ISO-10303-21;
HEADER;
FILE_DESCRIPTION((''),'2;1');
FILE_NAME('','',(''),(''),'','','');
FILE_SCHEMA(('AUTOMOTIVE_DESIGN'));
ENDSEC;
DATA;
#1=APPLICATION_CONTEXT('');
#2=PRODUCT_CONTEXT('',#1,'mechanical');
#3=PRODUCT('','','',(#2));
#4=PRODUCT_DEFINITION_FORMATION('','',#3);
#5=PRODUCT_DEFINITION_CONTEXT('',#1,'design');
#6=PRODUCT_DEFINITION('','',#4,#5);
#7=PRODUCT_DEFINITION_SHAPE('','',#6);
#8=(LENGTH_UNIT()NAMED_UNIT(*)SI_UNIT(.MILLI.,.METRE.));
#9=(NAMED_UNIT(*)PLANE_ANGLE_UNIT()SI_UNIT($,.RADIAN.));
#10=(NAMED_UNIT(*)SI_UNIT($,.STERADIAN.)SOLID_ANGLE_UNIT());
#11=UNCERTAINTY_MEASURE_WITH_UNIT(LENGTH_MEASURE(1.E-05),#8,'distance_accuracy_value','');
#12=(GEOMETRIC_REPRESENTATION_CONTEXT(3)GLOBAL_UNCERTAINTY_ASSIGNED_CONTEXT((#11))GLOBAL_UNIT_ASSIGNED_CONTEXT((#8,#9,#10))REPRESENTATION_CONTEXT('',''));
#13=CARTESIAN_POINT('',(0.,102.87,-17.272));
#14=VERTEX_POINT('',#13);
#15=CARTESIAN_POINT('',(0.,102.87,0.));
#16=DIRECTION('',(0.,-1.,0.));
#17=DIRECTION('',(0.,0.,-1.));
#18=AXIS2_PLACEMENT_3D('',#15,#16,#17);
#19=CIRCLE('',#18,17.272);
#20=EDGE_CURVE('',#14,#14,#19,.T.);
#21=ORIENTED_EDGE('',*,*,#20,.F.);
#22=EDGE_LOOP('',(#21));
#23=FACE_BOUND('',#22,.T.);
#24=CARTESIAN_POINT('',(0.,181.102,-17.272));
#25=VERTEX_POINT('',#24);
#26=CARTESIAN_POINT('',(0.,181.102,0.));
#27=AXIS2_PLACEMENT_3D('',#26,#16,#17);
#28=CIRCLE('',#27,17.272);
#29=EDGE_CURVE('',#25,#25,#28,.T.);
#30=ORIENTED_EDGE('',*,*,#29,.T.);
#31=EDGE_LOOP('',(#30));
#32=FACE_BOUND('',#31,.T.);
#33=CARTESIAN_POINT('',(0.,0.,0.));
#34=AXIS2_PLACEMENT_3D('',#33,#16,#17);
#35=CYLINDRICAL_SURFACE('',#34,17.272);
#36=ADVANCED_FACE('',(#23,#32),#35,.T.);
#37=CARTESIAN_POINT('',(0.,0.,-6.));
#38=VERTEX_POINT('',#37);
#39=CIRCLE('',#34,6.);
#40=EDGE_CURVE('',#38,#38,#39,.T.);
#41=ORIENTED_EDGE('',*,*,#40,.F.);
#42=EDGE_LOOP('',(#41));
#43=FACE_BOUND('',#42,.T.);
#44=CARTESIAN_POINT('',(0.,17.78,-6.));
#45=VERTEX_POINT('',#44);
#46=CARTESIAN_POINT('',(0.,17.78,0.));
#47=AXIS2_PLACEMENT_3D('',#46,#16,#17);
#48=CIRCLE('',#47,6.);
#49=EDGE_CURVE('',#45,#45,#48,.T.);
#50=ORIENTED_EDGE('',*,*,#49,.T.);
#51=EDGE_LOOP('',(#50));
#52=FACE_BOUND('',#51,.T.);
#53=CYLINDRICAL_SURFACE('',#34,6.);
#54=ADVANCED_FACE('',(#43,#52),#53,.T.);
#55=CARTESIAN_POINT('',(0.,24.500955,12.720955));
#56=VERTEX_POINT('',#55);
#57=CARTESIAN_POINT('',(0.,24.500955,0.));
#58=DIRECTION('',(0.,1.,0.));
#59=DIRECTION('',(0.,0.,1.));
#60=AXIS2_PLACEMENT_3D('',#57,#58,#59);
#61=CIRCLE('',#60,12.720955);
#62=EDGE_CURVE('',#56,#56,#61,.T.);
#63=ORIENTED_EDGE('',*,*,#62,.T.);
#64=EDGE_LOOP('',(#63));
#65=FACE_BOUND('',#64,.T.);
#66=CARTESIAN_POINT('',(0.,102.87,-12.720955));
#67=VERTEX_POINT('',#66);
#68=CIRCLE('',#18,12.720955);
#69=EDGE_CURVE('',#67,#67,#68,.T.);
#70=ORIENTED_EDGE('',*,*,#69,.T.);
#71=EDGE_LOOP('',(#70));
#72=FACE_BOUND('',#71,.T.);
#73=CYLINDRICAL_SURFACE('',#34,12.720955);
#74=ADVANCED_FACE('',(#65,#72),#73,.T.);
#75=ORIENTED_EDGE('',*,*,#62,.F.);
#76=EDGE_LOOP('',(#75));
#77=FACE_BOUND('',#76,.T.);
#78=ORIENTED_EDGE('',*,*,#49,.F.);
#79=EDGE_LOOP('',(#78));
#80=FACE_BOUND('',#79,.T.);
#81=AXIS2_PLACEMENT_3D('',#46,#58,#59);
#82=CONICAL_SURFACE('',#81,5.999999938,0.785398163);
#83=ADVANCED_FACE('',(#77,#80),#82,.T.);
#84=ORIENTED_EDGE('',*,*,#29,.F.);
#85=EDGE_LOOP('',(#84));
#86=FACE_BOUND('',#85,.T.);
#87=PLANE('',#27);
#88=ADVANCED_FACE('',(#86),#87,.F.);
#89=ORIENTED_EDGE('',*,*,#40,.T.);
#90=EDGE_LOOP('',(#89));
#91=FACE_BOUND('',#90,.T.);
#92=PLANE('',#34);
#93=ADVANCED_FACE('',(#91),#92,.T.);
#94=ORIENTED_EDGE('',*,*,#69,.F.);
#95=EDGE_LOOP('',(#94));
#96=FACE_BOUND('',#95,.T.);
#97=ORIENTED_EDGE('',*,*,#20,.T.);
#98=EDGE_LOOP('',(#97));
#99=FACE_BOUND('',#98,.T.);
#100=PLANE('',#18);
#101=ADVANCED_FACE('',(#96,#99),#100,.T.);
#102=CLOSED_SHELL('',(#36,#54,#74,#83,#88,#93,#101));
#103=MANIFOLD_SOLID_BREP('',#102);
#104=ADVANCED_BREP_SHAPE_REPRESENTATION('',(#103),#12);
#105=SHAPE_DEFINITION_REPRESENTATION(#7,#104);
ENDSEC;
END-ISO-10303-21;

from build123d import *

# Parameters (mm, degrees)
SKETCH2_W     = 12.720955
SKETCH2_H     = 33.02
SKETCH2_W_2   = 5.999999938
SKETCH2_H_2   = 25.4
CHAMFER1_SIZE = 7.62


with BuildPart() as part:
    # Sketch2 → Revolve1 (revolve)
    with BuildSketch(Plane.XY, mode=Mode.PRIVATE) as revolve1_sk:
        with Locations((6.3604775, 86.36)):
            Rectangle(SKETCH2_W, SKETCH2_H)
        Polygon((0, 181.102), (0, 102.87), (12.720955, 102.87), (17.272, 102.87), (17.272, 181.102), align=None)
        Polygon((0, 69.85), (0, 25.4), (5.999999938, 25.4), (12.720955, 25.4), (12.720955, 69.85), align=None)
        with Locations((2.999999969, 12.7)):
            Rectangle(SKETCH2_W_2, SKETCH2_H_2)
    revolve(revolve1_sk.sketch.rotate(Axis((0, 0, 0), (0, 1, 0)), 90), axis=Axis((0, 0, 0), (0, 1, 0)))

    # Chamfer1
    # the kernel refuses this chamfer: 7.62 mm, written as the material it adds along each edge
    with BuildSketch(Plane(origin=(0, 25.4, 0), x_dir=(0, 0, -1), z_dir=(1, 0, 0))) as chamfer1_piece_1_section:
        Polygon((5.999999938 + CHAMFER1_SIZE, 0), (5.999999938, -CHAMFER1_SIZE), (5.999999938, 0), align=None)
    chamfer1_piece_1 = revolve(axis=Axis((0, 25.4, 0), (0, 1, 0)), mode=Mode.PRIVATE)
    chamfer1_piece_1 = chamfer1_piece_1 & Plane(origin=(0, 21.11622986, 0), x_dir=(0, 0, -1), z_dir=(0, 1, 0)) * Cylinder(12.720955, 55, mode=Mode.PRIVATE)
    add(chamfer1_piece_1)


solid = part.part
